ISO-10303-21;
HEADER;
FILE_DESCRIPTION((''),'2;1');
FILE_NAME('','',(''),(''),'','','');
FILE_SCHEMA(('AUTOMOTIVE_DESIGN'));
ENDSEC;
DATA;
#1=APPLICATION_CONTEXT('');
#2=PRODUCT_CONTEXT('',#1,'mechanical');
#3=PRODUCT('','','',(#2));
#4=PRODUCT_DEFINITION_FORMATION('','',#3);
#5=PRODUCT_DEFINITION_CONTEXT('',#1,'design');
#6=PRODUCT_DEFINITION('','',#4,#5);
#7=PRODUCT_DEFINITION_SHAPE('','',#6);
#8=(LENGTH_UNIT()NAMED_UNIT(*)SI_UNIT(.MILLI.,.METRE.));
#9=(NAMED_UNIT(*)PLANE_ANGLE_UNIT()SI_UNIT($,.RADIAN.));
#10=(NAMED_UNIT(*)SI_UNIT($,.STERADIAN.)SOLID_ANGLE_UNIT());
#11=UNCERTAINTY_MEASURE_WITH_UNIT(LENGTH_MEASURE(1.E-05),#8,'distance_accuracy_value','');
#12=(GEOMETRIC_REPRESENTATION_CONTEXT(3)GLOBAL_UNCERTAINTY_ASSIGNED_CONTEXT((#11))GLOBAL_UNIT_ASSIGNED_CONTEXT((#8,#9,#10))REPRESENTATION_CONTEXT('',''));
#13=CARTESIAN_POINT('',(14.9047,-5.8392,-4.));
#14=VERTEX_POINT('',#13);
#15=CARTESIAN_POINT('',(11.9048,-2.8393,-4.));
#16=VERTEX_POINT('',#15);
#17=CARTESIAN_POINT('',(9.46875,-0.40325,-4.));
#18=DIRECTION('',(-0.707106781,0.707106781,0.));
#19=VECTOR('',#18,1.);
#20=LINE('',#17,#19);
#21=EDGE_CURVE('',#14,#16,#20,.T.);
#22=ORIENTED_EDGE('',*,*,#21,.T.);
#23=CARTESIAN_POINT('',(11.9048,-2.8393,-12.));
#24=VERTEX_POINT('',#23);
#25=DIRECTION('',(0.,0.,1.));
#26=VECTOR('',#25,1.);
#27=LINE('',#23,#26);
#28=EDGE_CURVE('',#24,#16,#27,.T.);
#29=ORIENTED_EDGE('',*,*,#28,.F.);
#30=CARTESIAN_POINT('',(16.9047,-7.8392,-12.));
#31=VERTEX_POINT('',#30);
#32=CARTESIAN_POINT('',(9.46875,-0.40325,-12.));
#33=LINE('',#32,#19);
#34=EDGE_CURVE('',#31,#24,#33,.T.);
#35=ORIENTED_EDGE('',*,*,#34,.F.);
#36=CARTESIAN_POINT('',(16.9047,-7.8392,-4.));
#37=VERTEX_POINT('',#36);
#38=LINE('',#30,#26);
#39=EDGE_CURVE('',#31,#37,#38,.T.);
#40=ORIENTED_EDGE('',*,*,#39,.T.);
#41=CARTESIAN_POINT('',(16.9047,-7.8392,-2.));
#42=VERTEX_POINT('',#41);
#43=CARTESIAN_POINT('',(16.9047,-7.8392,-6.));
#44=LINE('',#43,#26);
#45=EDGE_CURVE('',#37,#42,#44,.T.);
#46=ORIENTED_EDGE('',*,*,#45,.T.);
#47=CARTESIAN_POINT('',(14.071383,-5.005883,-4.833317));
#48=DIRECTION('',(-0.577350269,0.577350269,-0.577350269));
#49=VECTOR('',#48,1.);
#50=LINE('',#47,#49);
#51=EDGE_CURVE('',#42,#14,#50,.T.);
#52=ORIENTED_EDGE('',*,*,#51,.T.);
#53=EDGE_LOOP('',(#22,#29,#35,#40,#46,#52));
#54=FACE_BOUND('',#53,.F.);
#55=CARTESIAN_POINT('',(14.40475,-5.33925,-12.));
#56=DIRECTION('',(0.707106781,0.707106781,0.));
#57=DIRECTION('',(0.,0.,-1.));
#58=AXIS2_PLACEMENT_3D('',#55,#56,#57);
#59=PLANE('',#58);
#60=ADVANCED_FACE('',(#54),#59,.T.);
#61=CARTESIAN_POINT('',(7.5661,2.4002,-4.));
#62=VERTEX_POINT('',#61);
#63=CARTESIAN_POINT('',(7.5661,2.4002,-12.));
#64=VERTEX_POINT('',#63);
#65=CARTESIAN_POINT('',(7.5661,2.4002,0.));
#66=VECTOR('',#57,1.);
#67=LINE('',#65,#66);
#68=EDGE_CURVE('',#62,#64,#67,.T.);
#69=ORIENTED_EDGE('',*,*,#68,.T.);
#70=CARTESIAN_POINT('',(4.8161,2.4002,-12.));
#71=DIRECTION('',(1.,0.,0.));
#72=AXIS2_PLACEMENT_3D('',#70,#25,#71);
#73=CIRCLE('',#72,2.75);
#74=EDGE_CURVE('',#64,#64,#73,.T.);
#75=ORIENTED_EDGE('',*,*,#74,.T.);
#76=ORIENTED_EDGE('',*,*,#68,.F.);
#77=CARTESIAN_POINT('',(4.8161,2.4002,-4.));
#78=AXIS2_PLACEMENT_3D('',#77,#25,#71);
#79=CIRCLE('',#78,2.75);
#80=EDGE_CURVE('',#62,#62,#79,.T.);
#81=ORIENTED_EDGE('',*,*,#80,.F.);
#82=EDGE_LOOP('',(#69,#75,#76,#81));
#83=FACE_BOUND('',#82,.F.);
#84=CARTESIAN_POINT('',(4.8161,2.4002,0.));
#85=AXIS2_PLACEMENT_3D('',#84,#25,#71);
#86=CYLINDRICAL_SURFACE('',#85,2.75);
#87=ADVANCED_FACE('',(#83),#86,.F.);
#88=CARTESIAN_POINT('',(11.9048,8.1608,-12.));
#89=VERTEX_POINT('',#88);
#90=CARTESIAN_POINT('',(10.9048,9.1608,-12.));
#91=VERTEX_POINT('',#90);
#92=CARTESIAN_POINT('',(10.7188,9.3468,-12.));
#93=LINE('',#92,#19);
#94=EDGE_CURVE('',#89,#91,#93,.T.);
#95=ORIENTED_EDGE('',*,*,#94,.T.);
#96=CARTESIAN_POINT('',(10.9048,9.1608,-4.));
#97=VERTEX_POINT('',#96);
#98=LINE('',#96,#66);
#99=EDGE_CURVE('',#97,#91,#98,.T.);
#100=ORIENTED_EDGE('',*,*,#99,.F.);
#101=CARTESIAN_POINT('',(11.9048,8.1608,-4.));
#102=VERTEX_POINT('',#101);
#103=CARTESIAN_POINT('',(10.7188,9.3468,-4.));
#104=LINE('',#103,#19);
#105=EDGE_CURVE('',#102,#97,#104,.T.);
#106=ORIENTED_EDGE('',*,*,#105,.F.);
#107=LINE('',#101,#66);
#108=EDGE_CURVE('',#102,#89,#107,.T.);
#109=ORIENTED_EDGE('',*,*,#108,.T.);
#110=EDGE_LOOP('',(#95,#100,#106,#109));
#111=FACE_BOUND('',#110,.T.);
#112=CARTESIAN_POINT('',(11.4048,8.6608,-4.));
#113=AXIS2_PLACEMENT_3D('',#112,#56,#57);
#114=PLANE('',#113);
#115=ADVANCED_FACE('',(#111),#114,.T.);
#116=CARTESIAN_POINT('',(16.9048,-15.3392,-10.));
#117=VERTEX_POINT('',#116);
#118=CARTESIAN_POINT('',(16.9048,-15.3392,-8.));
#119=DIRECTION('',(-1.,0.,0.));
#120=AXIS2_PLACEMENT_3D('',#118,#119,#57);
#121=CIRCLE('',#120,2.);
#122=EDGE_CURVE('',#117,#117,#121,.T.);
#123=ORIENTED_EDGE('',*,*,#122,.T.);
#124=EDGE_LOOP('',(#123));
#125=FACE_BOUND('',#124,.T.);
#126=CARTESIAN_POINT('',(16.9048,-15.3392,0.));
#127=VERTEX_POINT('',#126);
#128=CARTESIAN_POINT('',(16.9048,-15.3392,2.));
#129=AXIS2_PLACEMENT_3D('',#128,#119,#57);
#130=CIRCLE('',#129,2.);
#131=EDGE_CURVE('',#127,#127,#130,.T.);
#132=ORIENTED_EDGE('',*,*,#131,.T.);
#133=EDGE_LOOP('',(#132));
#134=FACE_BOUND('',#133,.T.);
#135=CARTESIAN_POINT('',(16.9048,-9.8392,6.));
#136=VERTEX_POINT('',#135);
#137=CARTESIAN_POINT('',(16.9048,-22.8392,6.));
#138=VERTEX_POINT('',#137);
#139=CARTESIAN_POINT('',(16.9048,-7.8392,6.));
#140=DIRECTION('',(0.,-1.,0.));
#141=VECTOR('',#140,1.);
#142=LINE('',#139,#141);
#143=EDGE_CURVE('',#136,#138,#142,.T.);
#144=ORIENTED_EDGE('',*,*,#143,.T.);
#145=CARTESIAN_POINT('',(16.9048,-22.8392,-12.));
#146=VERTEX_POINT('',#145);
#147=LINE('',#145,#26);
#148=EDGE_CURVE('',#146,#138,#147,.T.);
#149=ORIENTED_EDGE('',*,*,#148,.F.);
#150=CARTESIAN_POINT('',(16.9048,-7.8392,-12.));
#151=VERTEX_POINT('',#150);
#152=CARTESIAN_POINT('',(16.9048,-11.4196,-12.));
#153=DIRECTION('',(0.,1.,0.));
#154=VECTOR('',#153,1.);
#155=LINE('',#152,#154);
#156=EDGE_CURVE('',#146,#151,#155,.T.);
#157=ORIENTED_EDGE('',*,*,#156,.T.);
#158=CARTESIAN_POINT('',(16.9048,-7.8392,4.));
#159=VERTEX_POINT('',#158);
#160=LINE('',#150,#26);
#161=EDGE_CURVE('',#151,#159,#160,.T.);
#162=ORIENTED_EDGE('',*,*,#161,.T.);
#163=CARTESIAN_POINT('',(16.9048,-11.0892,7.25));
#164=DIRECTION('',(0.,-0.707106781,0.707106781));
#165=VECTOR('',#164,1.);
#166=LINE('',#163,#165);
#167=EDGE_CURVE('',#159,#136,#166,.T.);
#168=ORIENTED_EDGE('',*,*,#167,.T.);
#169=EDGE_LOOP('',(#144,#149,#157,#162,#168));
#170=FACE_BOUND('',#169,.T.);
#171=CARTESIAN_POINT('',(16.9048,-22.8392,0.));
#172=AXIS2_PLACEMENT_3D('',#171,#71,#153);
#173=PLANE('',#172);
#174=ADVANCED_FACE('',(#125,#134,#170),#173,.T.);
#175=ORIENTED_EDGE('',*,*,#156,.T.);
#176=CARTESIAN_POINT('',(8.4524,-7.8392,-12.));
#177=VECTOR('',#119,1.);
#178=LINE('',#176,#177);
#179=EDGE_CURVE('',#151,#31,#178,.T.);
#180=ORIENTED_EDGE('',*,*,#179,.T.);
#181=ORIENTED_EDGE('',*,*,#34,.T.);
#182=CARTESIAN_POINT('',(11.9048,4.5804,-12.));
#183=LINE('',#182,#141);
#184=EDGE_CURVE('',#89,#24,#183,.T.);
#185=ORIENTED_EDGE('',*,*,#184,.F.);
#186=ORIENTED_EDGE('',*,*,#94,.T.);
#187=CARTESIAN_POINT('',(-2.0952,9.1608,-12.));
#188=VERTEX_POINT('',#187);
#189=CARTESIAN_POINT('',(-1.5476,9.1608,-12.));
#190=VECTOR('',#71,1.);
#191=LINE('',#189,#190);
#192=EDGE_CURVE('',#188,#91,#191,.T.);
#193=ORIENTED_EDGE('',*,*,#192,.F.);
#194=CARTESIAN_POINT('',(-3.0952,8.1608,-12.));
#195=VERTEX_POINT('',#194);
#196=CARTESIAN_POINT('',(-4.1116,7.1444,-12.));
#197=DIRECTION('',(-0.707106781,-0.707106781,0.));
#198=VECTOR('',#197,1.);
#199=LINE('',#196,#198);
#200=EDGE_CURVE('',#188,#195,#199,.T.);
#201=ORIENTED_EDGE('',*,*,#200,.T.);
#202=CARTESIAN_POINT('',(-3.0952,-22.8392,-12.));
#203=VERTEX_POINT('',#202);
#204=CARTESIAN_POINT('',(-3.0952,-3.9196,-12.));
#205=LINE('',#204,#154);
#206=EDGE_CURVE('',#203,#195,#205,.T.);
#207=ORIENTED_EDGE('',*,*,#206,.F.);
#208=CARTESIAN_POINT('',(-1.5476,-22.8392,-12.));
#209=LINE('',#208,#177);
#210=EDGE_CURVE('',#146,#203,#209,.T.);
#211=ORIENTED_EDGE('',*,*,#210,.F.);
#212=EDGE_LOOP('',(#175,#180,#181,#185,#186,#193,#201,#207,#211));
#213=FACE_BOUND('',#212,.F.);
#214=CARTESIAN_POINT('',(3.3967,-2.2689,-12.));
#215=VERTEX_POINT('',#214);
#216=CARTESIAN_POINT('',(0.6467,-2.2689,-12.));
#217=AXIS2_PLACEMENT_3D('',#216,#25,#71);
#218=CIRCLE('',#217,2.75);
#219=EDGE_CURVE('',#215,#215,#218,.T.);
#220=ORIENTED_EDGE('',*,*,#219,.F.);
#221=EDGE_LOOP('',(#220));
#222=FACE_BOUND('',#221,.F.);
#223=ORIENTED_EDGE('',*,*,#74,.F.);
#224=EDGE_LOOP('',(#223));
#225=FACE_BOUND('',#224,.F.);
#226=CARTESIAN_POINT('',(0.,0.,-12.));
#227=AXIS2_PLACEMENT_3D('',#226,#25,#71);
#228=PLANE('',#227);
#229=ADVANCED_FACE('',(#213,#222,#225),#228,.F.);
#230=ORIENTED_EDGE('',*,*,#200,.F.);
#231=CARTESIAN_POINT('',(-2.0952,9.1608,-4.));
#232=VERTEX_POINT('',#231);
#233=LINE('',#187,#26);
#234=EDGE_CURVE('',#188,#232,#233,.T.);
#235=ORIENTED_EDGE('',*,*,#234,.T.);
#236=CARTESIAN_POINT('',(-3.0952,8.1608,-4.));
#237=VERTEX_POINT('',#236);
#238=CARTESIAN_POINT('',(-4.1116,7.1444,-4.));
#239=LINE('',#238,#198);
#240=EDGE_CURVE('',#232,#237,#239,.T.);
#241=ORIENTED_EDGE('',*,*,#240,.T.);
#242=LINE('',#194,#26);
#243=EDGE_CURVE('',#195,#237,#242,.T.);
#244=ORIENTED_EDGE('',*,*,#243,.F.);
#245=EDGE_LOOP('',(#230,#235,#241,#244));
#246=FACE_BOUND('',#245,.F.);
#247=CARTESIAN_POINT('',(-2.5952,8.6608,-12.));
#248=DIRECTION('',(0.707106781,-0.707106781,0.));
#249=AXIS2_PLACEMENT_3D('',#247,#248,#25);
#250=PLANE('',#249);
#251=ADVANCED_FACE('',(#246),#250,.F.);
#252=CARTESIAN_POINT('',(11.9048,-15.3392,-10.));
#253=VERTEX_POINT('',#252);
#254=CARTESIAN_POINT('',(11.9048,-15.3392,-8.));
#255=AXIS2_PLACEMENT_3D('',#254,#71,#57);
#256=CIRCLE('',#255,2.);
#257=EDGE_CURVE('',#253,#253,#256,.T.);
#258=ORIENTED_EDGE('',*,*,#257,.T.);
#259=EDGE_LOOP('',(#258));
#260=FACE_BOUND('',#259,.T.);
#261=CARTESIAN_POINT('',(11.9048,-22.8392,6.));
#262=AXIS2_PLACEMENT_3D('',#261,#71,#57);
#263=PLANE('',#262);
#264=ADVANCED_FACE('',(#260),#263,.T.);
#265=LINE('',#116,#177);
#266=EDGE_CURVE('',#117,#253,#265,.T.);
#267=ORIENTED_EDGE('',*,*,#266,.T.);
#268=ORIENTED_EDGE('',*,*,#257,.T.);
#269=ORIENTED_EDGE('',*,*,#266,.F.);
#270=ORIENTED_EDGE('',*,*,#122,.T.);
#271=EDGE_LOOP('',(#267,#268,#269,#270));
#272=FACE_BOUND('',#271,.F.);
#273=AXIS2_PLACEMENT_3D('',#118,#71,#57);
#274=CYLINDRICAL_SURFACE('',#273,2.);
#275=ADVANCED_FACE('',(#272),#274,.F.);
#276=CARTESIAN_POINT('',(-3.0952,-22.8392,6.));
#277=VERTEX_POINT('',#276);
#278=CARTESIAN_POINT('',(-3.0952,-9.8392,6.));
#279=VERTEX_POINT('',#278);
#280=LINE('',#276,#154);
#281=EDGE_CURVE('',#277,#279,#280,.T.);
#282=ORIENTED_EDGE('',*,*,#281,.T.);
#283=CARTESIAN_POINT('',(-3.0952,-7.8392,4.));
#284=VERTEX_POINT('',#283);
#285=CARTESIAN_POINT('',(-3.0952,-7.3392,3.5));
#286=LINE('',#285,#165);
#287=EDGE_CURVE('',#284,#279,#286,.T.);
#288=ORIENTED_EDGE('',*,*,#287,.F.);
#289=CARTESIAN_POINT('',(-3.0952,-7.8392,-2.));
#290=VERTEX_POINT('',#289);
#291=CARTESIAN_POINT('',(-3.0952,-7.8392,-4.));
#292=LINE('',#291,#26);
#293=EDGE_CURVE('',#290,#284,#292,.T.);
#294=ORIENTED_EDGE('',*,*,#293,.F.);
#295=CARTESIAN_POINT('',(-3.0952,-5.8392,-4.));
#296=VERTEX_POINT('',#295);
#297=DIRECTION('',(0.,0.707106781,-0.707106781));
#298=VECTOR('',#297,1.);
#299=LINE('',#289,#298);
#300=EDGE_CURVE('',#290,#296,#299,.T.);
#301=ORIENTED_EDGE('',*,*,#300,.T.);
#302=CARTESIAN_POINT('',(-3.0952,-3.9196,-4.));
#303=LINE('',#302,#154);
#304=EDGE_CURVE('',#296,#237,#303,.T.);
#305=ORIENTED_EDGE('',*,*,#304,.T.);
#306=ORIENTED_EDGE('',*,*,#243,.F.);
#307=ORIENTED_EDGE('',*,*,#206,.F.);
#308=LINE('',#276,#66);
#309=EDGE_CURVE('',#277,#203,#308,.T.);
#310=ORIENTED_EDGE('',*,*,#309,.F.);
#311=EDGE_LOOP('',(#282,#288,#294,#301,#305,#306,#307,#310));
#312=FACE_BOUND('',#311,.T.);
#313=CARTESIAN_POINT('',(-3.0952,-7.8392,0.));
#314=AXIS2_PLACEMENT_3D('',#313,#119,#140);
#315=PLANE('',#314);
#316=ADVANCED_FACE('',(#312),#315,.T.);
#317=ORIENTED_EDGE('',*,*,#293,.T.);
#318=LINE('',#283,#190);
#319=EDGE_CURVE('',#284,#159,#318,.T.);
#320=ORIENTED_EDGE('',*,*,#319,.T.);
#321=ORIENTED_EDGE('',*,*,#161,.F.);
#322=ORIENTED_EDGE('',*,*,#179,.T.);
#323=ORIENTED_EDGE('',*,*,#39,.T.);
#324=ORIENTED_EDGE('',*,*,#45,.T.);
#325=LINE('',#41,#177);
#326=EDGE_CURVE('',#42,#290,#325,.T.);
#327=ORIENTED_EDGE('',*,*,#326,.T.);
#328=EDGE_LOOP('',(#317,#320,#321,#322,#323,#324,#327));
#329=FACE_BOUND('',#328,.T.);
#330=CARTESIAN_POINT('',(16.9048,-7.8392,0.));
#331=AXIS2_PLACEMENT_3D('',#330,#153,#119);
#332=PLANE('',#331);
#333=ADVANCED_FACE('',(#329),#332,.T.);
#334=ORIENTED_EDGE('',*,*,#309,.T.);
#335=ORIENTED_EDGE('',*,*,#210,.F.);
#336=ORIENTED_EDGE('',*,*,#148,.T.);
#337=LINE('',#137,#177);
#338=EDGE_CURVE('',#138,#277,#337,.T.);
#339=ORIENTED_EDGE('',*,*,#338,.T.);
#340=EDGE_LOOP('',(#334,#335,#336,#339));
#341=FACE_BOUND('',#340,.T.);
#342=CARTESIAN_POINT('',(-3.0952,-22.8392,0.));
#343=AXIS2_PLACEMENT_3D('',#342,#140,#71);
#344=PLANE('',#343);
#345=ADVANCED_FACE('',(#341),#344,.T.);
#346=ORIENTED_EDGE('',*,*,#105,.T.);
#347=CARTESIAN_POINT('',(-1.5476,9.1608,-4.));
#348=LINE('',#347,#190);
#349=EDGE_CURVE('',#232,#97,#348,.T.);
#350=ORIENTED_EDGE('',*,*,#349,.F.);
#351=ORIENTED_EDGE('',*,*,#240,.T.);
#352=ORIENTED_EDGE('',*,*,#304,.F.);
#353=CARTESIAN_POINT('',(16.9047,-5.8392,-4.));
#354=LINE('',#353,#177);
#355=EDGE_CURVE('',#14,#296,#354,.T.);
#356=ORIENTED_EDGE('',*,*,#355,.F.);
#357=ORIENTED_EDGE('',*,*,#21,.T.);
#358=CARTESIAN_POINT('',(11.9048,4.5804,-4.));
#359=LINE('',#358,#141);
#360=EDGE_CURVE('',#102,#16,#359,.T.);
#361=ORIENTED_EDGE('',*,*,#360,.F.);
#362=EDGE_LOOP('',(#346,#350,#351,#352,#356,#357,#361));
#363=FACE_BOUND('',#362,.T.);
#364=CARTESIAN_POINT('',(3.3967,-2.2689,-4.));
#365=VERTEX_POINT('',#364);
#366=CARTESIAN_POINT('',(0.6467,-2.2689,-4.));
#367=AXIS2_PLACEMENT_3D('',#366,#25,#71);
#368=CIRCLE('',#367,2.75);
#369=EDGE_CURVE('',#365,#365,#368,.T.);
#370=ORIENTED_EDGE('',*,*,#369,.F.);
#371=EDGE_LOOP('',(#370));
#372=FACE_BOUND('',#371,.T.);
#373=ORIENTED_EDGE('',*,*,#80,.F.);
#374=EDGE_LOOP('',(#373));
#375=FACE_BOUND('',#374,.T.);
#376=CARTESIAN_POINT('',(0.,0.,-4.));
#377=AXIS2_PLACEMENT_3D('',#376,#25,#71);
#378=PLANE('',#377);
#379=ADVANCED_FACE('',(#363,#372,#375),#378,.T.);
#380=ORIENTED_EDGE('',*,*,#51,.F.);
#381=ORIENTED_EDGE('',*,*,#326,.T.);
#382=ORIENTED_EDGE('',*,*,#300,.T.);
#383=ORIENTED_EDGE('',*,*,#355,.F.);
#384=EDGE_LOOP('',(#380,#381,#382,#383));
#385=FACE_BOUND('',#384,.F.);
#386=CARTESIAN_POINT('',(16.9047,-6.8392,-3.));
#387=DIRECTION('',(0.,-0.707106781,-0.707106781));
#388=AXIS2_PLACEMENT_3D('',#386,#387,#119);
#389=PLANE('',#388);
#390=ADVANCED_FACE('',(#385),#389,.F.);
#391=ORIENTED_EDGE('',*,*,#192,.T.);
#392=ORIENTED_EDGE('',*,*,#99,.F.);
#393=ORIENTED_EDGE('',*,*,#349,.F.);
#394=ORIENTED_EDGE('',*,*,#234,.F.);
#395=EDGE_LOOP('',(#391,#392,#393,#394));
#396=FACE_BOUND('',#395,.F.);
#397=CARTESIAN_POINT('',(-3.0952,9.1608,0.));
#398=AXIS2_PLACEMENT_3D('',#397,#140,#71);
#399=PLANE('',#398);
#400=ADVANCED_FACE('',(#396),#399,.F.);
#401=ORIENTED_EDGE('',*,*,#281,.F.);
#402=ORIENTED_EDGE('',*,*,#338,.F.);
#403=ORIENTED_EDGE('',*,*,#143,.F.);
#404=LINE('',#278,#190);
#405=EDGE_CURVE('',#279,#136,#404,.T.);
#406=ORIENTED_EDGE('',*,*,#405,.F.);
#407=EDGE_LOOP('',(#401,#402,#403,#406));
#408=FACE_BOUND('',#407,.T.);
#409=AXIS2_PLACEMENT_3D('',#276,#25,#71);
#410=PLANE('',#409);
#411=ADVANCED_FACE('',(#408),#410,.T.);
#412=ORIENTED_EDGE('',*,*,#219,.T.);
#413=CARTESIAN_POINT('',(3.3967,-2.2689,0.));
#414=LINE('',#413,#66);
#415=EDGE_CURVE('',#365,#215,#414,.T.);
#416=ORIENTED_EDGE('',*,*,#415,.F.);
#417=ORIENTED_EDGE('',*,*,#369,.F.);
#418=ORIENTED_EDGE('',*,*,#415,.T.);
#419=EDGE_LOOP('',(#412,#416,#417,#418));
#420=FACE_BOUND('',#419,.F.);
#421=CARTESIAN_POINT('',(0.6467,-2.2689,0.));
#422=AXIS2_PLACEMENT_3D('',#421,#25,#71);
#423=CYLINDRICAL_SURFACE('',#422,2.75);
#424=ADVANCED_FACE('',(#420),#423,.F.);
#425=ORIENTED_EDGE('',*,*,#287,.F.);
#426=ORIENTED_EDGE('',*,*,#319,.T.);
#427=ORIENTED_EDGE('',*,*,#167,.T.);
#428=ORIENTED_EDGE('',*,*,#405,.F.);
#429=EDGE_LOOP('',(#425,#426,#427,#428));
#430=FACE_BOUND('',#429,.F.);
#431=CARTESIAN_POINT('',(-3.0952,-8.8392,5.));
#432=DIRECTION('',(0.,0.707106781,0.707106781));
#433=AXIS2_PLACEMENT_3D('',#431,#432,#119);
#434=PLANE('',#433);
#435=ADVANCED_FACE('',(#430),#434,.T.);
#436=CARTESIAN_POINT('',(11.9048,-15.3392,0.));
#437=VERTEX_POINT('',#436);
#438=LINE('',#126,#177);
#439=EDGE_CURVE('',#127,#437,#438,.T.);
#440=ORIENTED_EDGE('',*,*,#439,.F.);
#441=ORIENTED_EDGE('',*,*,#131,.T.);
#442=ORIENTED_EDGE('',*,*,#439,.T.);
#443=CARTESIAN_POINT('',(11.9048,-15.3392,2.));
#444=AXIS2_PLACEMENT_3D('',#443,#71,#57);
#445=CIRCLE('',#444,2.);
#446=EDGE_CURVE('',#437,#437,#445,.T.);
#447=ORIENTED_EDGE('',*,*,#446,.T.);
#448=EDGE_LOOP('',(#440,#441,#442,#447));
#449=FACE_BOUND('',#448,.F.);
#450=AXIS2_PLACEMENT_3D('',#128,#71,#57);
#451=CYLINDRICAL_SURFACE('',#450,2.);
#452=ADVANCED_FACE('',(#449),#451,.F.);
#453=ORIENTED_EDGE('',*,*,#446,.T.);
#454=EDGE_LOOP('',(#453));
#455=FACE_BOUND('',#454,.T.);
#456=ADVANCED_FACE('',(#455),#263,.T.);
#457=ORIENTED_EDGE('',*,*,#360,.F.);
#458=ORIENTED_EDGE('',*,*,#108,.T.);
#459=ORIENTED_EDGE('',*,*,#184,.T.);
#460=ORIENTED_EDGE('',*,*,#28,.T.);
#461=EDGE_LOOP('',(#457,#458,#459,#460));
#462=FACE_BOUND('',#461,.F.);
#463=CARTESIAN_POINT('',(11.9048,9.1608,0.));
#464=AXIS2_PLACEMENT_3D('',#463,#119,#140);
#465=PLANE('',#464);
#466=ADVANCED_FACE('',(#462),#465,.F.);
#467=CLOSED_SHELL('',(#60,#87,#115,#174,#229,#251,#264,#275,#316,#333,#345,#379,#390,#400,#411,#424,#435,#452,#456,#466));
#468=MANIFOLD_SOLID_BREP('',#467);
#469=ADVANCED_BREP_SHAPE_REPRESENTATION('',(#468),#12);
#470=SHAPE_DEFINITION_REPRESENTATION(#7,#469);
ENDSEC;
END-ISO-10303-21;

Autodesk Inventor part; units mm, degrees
ref_plane "YZ Plane" through (0, 0, 0) normal (1, 0, 0) x (0, 1, 0)
ref_plane "XZ Plane" through (0, 0, 0) normal (0, 1, 0) x (-1, 0, 0)
ref_plane "XY Plane" through (0, 0, 0) normal (0, 0, 1) x (1, 0, 0)
sketch "草图1" plane through (0, 0, 0) normal (0, 0, 1) x (1, 0, 0)
  circle A0 centre (0.6467, -2.2689) radius 2.75
  circle A1 centre (4.8161, 2.4002) radius 2.5 construction
  circle A2 centre (4.8161, 2.4002) radius 2.5 construction
  circle A3 centre (4.8161, 2.4002) radius 2.5 construction
  line L0 (16.9048, -7.8392) -> (-3.0952, -7.8392)
  line L1 (-3.0952, -7.8392) -> (-3.0952, -22.8392)
  line L2 (-3.0952, -22.8392) -> (16.9048, -22.8392)
  line L3 (16.9048, -22.8392) -> (16.9048, -7.8392)
  line L4 (16.9048, -6.8375) -> (16.9048, -82.9867) projected
  line L5 (-1.0952, -7.8392) -> (16.9048, -7.8392) projected
  line L6 (-3.0952, 9.1608) -> (11.9048, 9.1608)
  line L7 (11.9048, 9.1608) -> (11.9048, -22.8392)
  line L8 (11.9048, -22.8392) -> (-3.0952, -22.8392)
  line L9 (-3.0952, -22.8392) -> (-3.0952, 9.1608)
  circle A4 centre (4.8161, 2.4002) radius 2.75
  point P0 (-3.0952, -7.8392)
  point P1 (11.9048, -7.8392)
  dimension "d2" = 15
  dimension "d3" = 20
  dimension "d4" = 15
  dimension "d5" = 17
  dimension "d26" = 5.5
  dimension "d28" = 5.5
extrude "拉伸1" add sketch "草图1" against normal blind 12
move faces "移动1" translate (0, 0, -4) faces at (8.5714, -17.8392, 0)
sketch "草图3" plane through (-3.0952, -22.8392, -4) normal (0, 0, 1) x (1, 0, 0)
  line L0 (20, 15) -> (20, 0) projected
  line L1 (0, 0) -> (0, 32) projected
  line L2 (20, 0) -> (0, 0)
  line L3 (0, 0) -> (0, 15)
  line L4 (0, 15) -> (20, 15)
  line L5 (20, 15) -> (20, 0)
  line L6 (20, 15) -> (15, 15) projected
  point P0 (3.0952, 22.8392)
extrude "拉伸2" add sketch "草图3" along normal blind 10
chamfer "倒角1" distance 5 angle 45 1 edges at (11.9048, -7.8392, -8)
chamfer "倒角2" distance 1 angle 45 2 edges at (-3.0952, 9.1608, -8) (11.9048, 9.1608, -8)
sketch "草图4" plane through (16.9048, -22.8392, 6) normal (1, 0, 0) x (0, 0, -1)
  circle A0 centre (4, 7.5) radius 2
  line L0 (0, 15) -> (0, 0) projected
  line L1 (0, 7.5) -> (18, 7.5)
  line L2 (18, 0) -> (18, 31) projected
  circle A1 centre (14, 7.5) radius 2
  line L3 (0, 0) -> (0, 15) projected
  point P0 (6, 22.8392)
  point P1 (0, 7.5)
  dimension "d17" = 4
  dimension "d18" = 4
  dimension "d19" = 10
  dimension "d20" = 4
extrude "拉伸3" cut sketch "草图4" against normal blind 5
chamfer "倒角3" distance 2 angle 45 2 edges at (6.9048, -7.8392, 6) (6.9047, -7.8392, -4)
properties part number "滚纸"
